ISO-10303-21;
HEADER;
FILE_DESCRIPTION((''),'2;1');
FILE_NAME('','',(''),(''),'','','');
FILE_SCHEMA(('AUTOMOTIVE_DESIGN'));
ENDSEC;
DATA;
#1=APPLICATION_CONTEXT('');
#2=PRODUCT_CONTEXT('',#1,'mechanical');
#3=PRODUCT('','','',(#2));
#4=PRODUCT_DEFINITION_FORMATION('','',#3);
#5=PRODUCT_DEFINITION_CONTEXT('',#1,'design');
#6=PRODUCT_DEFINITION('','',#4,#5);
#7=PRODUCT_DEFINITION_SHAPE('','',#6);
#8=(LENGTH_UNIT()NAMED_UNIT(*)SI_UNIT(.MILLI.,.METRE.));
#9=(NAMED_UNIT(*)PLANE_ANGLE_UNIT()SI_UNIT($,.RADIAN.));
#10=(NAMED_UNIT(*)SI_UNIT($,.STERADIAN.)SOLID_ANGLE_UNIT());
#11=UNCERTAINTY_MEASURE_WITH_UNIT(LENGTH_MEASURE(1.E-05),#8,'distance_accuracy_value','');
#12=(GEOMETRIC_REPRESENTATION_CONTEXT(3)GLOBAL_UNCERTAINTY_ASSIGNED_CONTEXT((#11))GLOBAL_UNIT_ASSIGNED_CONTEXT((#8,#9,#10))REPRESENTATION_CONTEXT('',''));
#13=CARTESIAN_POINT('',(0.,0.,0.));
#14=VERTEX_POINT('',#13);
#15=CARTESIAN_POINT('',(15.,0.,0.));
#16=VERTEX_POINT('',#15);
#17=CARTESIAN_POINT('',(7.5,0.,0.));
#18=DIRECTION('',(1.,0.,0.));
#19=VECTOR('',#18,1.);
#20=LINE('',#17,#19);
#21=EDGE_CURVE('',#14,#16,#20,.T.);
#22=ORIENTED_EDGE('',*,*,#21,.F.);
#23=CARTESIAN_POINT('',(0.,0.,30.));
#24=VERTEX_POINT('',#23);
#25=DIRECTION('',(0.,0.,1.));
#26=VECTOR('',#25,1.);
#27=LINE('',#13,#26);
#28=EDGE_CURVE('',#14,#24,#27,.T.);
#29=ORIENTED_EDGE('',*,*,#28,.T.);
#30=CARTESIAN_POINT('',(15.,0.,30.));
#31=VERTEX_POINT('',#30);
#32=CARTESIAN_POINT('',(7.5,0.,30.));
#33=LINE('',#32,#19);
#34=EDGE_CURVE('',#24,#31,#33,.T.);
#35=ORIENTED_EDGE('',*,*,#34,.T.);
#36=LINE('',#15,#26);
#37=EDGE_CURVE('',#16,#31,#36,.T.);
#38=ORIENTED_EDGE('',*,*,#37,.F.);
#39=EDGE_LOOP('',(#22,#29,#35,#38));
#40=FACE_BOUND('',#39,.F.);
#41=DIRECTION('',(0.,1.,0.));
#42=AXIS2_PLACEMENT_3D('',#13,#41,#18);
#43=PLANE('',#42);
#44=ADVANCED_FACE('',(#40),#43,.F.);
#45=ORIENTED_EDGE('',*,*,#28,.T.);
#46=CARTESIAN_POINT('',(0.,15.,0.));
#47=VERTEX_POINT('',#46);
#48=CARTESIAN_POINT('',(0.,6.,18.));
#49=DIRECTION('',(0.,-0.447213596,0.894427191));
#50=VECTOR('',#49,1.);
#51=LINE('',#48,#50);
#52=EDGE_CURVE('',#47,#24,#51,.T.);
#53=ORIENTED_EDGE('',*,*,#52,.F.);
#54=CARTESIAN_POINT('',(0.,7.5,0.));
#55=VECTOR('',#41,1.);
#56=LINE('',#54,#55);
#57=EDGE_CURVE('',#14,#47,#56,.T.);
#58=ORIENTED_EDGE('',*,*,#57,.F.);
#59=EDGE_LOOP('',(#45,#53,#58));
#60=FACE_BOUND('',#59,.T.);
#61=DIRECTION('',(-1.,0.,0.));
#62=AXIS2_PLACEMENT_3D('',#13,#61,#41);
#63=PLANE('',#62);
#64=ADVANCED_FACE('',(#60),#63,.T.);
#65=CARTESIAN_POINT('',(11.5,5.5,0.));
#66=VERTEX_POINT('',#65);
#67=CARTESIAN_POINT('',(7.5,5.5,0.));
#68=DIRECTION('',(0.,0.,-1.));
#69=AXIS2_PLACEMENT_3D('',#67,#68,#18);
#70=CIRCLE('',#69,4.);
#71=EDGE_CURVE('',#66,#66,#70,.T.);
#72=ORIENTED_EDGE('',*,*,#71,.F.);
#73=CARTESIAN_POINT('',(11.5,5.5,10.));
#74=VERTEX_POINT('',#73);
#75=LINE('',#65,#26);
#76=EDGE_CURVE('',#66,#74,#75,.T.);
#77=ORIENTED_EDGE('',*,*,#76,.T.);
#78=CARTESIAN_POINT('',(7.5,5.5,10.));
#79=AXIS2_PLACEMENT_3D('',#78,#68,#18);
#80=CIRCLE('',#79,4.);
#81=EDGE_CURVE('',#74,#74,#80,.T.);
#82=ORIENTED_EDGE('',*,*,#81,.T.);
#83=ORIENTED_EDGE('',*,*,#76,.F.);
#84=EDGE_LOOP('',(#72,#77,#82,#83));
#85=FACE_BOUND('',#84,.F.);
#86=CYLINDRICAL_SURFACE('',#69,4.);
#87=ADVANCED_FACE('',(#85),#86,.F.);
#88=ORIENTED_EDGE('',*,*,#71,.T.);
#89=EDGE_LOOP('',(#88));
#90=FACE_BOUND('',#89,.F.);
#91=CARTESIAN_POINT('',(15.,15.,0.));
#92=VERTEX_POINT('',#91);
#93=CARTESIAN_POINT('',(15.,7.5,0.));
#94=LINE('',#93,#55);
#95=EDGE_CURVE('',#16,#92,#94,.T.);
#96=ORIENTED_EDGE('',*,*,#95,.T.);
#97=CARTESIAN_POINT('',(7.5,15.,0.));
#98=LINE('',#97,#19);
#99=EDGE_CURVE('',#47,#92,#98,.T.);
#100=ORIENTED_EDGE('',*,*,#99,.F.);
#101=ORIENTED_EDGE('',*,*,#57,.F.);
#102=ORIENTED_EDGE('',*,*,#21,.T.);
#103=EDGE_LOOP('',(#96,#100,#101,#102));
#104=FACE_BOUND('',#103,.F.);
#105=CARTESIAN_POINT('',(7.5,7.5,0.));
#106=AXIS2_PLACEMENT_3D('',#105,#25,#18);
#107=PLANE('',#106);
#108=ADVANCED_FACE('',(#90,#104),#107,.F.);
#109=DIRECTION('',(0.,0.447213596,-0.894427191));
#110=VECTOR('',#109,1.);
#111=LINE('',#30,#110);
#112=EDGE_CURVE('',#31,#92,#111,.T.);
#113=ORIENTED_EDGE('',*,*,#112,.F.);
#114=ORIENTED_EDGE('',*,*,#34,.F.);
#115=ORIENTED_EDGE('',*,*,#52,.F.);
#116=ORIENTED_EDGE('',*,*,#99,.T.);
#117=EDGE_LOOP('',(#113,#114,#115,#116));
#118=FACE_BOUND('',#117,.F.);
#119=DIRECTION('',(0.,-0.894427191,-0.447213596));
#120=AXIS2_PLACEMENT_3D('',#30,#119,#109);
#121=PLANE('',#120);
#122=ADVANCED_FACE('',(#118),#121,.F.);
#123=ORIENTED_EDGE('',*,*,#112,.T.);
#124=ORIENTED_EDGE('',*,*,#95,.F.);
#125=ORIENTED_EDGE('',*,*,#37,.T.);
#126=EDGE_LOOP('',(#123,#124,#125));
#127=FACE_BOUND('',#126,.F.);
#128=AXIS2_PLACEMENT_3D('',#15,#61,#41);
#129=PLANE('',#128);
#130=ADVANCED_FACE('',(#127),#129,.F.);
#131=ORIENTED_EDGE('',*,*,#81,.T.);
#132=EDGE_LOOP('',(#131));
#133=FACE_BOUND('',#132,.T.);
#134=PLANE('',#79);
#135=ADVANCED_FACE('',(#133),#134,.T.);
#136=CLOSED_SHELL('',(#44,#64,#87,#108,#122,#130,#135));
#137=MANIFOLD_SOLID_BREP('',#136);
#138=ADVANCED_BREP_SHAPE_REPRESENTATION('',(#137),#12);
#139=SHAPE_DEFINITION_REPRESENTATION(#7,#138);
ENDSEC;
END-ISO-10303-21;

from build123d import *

# Parameters (mm, degrees)
F0_W     = 15
F0_H     = 15
F1_DEPTH = 30
F3_DEPTH = 25
F4_R     = 4
F5_DEPTH = 10


# Not quite as in the source:
# - a feature names something its author has since deleted; it is built from what else it names


with BuildPart() as f1:
    # F0 (on Top) → F1 (new body)
    with BuildSketch(Plane.XY):
        with Locations((7.5, 7.5)):
            Rectangle(F0_W, F0_H)
    extrude(amount=F1_DEPTH)

    # F2 (on face) → F3 (cut)
    with BuildSketch(Plane.YZ.offset(15)):
        Polygon((15, 30), (0, 30), (15, 0), align=None)
    extrude(amount=-F3_DEPTH, mode=Mode.SUBTRACT)

    # F4 (on face) → F5 (cut)
    with BuildSketch(Plane(origin=(0, 0, 0), x_dir=(1, 0, 0), z_dir=(0, 0, -1))):
        with Locations((7.5, -5.5)):
            Circle(F4_R)
    extrude(amount=-F5_DEPTH, mode=Mode.SUBTRACT)


solid = f1.part
